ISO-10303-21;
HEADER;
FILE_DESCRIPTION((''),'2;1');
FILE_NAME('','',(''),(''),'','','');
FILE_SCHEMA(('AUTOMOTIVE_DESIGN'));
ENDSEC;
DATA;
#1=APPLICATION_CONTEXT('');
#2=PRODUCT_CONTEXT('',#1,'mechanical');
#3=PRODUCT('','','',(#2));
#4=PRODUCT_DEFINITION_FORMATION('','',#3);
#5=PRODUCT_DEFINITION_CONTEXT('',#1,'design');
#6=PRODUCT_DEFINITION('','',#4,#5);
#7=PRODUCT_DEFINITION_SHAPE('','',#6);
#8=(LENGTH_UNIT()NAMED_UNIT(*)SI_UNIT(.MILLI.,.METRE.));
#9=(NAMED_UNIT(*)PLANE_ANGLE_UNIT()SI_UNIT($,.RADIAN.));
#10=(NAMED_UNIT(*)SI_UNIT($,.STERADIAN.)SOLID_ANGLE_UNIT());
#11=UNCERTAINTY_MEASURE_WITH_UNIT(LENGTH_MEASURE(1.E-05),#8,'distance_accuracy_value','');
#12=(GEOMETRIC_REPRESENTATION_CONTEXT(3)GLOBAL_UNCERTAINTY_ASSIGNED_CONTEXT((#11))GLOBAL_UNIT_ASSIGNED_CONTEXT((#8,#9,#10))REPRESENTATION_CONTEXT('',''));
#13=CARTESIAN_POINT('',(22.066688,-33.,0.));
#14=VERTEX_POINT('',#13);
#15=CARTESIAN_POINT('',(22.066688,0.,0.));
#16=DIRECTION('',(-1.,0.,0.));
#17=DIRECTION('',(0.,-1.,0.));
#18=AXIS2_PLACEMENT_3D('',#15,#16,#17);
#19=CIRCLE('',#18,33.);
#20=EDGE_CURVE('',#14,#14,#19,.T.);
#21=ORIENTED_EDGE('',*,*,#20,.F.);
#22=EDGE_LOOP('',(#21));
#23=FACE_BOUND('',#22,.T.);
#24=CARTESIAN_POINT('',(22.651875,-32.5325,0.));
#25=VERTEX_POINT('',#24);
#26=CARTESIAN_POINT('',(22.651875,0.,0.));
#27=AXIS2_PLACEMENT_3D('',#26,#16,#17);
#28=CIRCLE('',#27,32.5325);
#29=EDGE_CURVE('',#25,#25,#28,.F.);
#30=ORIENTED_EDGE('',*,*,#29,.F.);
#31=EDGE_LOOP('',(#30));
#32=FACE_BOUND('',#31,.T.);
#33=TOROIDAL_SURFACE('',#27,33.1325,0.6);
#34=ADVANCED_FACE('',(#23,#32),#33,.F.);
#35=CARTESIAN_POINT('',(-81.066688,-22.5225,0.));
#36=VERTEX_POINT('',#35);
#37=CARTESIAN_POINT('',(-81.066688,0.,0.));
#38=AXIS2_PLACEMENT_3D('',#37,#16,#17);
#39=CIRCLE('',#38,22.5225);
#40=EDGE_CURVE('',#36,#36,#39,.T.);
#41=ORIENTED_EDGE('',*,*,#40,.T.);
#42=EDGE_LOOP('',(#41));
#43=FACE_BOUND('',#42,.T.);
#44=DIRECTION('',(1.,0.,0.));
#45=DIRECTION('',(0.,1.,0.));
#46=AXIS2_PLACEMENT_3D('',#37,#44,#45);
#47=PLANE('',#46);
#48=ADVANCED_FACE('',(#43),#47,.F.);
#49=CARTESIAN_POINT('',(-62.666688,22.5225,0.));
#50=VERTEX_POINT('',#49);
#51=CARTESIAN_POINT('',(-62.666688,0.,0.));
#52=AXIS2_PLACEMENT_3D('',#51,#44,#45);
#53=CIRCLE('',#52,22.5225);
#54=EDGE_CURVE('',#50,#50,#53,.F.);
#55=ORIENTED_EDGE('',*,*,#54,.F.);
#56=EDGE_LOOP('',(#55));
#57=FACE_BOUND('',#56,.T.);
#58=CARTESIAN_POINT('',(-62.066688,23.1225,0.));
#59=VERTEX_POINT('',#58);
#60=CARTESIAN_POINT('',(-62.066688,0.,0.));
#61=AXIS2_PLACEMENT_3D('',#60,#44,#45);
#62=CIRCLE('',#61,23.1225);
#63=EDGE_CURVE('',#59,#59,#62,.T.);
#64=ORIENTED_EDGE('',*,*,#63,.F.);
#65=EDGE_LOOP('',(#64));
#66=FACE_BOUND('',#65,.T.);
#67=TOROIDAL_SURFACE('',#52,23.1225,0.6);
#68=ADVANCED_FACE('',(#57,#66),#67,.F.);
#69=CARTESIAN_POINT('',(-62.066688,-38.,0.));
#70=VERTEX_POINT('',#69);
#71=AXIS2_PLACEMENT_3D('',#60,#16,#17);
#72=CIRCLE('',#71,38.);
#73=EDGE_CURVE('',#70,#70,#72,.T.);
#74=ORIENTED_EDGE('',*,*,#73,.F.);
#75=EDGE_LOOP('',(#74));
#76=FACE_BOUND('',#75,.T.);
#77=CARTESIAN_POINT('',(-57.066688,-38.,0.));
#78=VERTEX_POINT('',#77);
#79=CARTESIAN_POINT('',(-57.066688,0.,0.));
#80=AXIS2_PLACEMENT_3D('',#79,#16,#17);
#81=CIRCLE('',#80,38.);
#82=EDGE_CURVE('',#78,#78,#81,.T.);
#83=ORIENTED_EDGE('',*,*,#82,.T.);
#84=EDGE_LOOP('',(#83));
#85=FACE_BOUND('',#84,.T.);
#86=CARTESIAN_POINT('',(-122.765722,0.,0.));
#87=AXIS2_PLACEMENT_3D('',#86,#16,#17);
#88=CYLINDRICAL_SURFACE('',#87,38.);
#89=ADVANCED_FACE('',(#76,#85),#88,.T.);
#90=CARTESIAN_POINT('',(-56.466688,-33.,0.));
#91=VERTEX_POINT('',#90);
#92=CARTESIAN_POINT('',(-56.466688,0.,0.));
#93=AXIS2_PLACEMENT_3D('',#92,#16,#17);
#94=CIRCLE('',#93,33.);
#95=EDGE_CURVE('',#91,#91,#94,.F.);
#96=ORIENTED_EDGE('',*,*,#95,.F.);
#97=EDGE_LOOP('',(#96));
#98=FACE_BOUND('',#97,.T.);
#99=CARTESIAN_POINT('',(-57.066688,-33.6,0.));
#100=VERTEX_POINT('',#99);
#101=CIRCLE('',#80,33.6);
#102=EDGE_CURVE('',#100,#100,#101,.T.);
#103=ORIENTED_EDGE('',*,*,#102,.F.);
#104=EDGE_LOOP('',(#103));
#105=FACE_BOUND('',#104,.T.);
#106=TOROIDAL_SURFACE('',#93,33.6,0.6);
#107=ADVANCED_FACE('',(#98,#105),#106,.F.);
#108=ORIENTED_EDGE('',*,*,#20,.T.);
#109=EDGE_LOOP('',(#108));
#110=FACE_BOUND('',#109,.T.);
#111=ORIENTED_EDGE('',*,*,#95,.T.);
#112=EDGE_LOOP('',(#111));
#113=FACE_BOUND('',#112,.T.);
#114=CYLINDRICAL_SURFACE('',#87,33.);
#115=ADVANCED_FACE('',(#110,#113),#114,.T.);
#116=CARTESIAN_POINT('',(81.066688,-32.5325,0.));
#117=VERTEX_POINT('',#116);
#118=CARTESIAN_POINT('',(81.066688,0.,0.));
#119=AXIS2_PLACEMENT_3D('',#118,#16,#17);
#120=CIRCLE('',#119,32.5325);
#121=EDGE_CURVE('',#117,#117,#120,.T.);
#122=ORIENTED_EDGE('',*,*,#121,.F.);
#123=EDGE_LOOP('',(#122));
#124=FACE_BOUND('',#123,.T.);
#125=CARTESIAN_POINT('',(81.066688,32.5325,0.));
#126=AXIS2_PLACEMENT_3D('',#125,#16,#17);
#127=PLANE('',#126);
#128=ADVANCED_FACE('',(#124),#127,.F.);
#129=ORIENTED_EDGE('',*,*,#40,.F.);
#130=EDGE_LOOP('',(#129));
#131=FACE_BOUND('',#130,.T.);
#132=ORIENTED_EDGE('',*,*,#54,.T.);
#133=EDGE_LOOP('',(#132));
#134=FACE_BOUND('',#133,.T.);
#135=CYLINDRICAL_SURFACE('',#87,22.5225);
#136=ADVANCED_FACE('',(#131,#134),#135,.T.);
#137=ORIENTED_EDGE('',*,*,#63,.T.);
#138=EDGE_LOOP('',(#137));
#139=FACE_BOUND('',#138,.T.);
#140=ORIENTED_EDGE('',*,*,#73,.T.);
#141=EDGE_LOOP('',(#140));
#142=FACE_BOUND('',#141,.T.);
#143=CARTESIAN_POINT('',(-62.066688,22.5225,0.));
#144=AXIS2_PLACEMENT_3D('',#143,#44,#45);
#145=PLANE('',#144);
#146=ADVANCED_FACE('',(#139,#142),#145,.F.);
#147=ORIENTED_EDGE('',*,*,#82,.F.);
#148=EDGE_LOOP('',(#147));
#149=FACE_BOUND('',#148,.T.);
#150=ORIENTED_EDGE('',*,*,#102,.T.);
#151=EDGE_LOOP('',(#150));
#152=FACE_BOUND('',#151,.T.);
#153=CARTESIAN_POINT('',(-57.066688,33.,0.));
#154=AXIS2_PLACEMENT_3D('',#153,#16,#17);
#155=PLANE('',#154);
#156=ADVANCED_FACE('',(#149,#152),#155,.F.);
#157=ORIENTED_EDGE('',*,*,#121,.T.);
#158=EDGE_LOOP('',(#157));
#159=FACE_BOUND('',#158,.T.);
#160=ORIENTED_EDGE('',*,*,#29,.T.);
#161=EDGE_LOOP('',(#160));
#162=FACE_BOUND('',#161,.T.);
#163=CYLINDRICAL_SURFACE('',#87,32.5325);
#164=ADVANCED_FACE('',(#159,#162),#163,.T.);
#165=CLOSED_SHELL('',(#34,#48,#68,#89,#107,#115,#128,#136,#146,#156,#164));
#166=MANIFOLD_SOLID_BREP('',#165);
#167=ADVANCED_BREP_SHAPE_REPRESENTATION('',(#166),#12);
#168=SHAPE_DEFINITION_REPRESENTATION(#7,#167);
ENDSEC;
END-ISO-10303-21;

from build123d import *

# Parameters (mm, degrees)
FILLET1_R = 0.6


with BuildPart() as part:
    # Sketch1 → Revolve1 (revolve)
    with BuildSketch(Plane.XY, mode=Mode.PRIVATE) as revolve1_sk:
        Polygon((-81.066688046, 0), (81.066688046, 0), (81.066688046, 32.5325), (40.066688046, 32.5325), (22.066688046, 32.5325), (22.066688046, 33), (-15.469523763, 33), (-57.066688046, 33), (-57.066688046, 38), (-62.066688046, 38), (-62.066688046, 22.5225), (-81.066688046, 22.5225), align=None)
    revolve(revolve1_sk.sketch.rotate(Axis((-122.765721942, 0, 0), (1, 0, 0)), 180), axis=Axis((-122.765721942, 0, 0), (1, 0, 0)))

    # Fillet1
    # the kernel refuses this fillet: 0.6 mm, written as the material it adds along each edge
    with BuildSketch(Plane(origin=(22.066688046, 0, 0), x_dir=(0, -1, 0), z_dir=(0, 0, 1))) as fillet1_piece_1:
        with BuildLine():
            CenterArc((33.1325, 0.585186936), FILLET1_R, 180, 77.242016626)
            Line((33, 0), (32.99735, -0.011703739))
            ThreePointArc((32.99735, -0.011703739), (32.76625, -0.012), (32.5325, -0.012))
            Line((32.5325, -0.012), (32.5205, 0))
            Line((32.5205, 0), (32.5205, 0.585186936))
            Line((32.5205, 0.585186936), (32.5325, 0.585186936))
        make_face()
    revolve(axis=Axis((22.066688046, 0, 0), (1, 0, 0)))
    with BuildSketch(Plane(origin=(-57.066688046, 0, 0), x_dir=(0, -1, 0), z_dir=(0, 0, 1))) as fillet1_piece_2:
        with BuildLine():
            CenterArc((33 + FILLET1_R, FILLET1_R), FILLET1_R, 180, 90)
            Line((33 + FILLET1_R, 0), (33 + FILLET1_R, -FILLET1_R * 0.02))
            Line((33 + FILLET1_R, -FILLET1_R * 0.02), (33 - FILLET1_R * 0.02, -FILLET1_R * 0.02))
            Line((33 - FILLET1_R * 0.02, -FILLET1_R * 0.02), (33 - FILLET1_R * 0.02, FILLET1_R))
            Line((33 - FILLET1_R * 0.02, FILLET1_R), (33, FILLET1_R))
        make_face()
    revolve(axis=Axis((-57.066688046, 0, 0), (1, 0, 0)))
    with BuildSketch(Plane(origin=(-62.066688046, 0, 0), x_dir=(0, -1, 0), z_dir=(0, 0, 1))) as fillet1_piece_3:
        with BuildLine():
            CenterArc((22.5225 + FILLET1_R, -FILLET1_R), FILLET1_R, 90, 90)
            Line((22.5225, -FILLET1_R), (22.5225 - FILLET1_R * 0.02, -FILLET1_R))
            Line((22.5225 - FILLET1_R * 0.02, -FILLET1_R), (22.5225 - FILLET1_R * 0.02, FILLET1_R * 0.02))
            Line((22.5225 - FILLET1_R * 0.02, FILLET1_R * 0.02), (22.5225 + FILLET1_R, FILLET1_R * 0.02))
            Line((22.5225 + FILLET1_R, FILLET1_R * 0.02), (22.5225 + FILLET1_R, 0))
        make_face()
    revolve(axis=Axis((-62.066688046, 0, 0), (1, 0, 0)))


solid = part.part
